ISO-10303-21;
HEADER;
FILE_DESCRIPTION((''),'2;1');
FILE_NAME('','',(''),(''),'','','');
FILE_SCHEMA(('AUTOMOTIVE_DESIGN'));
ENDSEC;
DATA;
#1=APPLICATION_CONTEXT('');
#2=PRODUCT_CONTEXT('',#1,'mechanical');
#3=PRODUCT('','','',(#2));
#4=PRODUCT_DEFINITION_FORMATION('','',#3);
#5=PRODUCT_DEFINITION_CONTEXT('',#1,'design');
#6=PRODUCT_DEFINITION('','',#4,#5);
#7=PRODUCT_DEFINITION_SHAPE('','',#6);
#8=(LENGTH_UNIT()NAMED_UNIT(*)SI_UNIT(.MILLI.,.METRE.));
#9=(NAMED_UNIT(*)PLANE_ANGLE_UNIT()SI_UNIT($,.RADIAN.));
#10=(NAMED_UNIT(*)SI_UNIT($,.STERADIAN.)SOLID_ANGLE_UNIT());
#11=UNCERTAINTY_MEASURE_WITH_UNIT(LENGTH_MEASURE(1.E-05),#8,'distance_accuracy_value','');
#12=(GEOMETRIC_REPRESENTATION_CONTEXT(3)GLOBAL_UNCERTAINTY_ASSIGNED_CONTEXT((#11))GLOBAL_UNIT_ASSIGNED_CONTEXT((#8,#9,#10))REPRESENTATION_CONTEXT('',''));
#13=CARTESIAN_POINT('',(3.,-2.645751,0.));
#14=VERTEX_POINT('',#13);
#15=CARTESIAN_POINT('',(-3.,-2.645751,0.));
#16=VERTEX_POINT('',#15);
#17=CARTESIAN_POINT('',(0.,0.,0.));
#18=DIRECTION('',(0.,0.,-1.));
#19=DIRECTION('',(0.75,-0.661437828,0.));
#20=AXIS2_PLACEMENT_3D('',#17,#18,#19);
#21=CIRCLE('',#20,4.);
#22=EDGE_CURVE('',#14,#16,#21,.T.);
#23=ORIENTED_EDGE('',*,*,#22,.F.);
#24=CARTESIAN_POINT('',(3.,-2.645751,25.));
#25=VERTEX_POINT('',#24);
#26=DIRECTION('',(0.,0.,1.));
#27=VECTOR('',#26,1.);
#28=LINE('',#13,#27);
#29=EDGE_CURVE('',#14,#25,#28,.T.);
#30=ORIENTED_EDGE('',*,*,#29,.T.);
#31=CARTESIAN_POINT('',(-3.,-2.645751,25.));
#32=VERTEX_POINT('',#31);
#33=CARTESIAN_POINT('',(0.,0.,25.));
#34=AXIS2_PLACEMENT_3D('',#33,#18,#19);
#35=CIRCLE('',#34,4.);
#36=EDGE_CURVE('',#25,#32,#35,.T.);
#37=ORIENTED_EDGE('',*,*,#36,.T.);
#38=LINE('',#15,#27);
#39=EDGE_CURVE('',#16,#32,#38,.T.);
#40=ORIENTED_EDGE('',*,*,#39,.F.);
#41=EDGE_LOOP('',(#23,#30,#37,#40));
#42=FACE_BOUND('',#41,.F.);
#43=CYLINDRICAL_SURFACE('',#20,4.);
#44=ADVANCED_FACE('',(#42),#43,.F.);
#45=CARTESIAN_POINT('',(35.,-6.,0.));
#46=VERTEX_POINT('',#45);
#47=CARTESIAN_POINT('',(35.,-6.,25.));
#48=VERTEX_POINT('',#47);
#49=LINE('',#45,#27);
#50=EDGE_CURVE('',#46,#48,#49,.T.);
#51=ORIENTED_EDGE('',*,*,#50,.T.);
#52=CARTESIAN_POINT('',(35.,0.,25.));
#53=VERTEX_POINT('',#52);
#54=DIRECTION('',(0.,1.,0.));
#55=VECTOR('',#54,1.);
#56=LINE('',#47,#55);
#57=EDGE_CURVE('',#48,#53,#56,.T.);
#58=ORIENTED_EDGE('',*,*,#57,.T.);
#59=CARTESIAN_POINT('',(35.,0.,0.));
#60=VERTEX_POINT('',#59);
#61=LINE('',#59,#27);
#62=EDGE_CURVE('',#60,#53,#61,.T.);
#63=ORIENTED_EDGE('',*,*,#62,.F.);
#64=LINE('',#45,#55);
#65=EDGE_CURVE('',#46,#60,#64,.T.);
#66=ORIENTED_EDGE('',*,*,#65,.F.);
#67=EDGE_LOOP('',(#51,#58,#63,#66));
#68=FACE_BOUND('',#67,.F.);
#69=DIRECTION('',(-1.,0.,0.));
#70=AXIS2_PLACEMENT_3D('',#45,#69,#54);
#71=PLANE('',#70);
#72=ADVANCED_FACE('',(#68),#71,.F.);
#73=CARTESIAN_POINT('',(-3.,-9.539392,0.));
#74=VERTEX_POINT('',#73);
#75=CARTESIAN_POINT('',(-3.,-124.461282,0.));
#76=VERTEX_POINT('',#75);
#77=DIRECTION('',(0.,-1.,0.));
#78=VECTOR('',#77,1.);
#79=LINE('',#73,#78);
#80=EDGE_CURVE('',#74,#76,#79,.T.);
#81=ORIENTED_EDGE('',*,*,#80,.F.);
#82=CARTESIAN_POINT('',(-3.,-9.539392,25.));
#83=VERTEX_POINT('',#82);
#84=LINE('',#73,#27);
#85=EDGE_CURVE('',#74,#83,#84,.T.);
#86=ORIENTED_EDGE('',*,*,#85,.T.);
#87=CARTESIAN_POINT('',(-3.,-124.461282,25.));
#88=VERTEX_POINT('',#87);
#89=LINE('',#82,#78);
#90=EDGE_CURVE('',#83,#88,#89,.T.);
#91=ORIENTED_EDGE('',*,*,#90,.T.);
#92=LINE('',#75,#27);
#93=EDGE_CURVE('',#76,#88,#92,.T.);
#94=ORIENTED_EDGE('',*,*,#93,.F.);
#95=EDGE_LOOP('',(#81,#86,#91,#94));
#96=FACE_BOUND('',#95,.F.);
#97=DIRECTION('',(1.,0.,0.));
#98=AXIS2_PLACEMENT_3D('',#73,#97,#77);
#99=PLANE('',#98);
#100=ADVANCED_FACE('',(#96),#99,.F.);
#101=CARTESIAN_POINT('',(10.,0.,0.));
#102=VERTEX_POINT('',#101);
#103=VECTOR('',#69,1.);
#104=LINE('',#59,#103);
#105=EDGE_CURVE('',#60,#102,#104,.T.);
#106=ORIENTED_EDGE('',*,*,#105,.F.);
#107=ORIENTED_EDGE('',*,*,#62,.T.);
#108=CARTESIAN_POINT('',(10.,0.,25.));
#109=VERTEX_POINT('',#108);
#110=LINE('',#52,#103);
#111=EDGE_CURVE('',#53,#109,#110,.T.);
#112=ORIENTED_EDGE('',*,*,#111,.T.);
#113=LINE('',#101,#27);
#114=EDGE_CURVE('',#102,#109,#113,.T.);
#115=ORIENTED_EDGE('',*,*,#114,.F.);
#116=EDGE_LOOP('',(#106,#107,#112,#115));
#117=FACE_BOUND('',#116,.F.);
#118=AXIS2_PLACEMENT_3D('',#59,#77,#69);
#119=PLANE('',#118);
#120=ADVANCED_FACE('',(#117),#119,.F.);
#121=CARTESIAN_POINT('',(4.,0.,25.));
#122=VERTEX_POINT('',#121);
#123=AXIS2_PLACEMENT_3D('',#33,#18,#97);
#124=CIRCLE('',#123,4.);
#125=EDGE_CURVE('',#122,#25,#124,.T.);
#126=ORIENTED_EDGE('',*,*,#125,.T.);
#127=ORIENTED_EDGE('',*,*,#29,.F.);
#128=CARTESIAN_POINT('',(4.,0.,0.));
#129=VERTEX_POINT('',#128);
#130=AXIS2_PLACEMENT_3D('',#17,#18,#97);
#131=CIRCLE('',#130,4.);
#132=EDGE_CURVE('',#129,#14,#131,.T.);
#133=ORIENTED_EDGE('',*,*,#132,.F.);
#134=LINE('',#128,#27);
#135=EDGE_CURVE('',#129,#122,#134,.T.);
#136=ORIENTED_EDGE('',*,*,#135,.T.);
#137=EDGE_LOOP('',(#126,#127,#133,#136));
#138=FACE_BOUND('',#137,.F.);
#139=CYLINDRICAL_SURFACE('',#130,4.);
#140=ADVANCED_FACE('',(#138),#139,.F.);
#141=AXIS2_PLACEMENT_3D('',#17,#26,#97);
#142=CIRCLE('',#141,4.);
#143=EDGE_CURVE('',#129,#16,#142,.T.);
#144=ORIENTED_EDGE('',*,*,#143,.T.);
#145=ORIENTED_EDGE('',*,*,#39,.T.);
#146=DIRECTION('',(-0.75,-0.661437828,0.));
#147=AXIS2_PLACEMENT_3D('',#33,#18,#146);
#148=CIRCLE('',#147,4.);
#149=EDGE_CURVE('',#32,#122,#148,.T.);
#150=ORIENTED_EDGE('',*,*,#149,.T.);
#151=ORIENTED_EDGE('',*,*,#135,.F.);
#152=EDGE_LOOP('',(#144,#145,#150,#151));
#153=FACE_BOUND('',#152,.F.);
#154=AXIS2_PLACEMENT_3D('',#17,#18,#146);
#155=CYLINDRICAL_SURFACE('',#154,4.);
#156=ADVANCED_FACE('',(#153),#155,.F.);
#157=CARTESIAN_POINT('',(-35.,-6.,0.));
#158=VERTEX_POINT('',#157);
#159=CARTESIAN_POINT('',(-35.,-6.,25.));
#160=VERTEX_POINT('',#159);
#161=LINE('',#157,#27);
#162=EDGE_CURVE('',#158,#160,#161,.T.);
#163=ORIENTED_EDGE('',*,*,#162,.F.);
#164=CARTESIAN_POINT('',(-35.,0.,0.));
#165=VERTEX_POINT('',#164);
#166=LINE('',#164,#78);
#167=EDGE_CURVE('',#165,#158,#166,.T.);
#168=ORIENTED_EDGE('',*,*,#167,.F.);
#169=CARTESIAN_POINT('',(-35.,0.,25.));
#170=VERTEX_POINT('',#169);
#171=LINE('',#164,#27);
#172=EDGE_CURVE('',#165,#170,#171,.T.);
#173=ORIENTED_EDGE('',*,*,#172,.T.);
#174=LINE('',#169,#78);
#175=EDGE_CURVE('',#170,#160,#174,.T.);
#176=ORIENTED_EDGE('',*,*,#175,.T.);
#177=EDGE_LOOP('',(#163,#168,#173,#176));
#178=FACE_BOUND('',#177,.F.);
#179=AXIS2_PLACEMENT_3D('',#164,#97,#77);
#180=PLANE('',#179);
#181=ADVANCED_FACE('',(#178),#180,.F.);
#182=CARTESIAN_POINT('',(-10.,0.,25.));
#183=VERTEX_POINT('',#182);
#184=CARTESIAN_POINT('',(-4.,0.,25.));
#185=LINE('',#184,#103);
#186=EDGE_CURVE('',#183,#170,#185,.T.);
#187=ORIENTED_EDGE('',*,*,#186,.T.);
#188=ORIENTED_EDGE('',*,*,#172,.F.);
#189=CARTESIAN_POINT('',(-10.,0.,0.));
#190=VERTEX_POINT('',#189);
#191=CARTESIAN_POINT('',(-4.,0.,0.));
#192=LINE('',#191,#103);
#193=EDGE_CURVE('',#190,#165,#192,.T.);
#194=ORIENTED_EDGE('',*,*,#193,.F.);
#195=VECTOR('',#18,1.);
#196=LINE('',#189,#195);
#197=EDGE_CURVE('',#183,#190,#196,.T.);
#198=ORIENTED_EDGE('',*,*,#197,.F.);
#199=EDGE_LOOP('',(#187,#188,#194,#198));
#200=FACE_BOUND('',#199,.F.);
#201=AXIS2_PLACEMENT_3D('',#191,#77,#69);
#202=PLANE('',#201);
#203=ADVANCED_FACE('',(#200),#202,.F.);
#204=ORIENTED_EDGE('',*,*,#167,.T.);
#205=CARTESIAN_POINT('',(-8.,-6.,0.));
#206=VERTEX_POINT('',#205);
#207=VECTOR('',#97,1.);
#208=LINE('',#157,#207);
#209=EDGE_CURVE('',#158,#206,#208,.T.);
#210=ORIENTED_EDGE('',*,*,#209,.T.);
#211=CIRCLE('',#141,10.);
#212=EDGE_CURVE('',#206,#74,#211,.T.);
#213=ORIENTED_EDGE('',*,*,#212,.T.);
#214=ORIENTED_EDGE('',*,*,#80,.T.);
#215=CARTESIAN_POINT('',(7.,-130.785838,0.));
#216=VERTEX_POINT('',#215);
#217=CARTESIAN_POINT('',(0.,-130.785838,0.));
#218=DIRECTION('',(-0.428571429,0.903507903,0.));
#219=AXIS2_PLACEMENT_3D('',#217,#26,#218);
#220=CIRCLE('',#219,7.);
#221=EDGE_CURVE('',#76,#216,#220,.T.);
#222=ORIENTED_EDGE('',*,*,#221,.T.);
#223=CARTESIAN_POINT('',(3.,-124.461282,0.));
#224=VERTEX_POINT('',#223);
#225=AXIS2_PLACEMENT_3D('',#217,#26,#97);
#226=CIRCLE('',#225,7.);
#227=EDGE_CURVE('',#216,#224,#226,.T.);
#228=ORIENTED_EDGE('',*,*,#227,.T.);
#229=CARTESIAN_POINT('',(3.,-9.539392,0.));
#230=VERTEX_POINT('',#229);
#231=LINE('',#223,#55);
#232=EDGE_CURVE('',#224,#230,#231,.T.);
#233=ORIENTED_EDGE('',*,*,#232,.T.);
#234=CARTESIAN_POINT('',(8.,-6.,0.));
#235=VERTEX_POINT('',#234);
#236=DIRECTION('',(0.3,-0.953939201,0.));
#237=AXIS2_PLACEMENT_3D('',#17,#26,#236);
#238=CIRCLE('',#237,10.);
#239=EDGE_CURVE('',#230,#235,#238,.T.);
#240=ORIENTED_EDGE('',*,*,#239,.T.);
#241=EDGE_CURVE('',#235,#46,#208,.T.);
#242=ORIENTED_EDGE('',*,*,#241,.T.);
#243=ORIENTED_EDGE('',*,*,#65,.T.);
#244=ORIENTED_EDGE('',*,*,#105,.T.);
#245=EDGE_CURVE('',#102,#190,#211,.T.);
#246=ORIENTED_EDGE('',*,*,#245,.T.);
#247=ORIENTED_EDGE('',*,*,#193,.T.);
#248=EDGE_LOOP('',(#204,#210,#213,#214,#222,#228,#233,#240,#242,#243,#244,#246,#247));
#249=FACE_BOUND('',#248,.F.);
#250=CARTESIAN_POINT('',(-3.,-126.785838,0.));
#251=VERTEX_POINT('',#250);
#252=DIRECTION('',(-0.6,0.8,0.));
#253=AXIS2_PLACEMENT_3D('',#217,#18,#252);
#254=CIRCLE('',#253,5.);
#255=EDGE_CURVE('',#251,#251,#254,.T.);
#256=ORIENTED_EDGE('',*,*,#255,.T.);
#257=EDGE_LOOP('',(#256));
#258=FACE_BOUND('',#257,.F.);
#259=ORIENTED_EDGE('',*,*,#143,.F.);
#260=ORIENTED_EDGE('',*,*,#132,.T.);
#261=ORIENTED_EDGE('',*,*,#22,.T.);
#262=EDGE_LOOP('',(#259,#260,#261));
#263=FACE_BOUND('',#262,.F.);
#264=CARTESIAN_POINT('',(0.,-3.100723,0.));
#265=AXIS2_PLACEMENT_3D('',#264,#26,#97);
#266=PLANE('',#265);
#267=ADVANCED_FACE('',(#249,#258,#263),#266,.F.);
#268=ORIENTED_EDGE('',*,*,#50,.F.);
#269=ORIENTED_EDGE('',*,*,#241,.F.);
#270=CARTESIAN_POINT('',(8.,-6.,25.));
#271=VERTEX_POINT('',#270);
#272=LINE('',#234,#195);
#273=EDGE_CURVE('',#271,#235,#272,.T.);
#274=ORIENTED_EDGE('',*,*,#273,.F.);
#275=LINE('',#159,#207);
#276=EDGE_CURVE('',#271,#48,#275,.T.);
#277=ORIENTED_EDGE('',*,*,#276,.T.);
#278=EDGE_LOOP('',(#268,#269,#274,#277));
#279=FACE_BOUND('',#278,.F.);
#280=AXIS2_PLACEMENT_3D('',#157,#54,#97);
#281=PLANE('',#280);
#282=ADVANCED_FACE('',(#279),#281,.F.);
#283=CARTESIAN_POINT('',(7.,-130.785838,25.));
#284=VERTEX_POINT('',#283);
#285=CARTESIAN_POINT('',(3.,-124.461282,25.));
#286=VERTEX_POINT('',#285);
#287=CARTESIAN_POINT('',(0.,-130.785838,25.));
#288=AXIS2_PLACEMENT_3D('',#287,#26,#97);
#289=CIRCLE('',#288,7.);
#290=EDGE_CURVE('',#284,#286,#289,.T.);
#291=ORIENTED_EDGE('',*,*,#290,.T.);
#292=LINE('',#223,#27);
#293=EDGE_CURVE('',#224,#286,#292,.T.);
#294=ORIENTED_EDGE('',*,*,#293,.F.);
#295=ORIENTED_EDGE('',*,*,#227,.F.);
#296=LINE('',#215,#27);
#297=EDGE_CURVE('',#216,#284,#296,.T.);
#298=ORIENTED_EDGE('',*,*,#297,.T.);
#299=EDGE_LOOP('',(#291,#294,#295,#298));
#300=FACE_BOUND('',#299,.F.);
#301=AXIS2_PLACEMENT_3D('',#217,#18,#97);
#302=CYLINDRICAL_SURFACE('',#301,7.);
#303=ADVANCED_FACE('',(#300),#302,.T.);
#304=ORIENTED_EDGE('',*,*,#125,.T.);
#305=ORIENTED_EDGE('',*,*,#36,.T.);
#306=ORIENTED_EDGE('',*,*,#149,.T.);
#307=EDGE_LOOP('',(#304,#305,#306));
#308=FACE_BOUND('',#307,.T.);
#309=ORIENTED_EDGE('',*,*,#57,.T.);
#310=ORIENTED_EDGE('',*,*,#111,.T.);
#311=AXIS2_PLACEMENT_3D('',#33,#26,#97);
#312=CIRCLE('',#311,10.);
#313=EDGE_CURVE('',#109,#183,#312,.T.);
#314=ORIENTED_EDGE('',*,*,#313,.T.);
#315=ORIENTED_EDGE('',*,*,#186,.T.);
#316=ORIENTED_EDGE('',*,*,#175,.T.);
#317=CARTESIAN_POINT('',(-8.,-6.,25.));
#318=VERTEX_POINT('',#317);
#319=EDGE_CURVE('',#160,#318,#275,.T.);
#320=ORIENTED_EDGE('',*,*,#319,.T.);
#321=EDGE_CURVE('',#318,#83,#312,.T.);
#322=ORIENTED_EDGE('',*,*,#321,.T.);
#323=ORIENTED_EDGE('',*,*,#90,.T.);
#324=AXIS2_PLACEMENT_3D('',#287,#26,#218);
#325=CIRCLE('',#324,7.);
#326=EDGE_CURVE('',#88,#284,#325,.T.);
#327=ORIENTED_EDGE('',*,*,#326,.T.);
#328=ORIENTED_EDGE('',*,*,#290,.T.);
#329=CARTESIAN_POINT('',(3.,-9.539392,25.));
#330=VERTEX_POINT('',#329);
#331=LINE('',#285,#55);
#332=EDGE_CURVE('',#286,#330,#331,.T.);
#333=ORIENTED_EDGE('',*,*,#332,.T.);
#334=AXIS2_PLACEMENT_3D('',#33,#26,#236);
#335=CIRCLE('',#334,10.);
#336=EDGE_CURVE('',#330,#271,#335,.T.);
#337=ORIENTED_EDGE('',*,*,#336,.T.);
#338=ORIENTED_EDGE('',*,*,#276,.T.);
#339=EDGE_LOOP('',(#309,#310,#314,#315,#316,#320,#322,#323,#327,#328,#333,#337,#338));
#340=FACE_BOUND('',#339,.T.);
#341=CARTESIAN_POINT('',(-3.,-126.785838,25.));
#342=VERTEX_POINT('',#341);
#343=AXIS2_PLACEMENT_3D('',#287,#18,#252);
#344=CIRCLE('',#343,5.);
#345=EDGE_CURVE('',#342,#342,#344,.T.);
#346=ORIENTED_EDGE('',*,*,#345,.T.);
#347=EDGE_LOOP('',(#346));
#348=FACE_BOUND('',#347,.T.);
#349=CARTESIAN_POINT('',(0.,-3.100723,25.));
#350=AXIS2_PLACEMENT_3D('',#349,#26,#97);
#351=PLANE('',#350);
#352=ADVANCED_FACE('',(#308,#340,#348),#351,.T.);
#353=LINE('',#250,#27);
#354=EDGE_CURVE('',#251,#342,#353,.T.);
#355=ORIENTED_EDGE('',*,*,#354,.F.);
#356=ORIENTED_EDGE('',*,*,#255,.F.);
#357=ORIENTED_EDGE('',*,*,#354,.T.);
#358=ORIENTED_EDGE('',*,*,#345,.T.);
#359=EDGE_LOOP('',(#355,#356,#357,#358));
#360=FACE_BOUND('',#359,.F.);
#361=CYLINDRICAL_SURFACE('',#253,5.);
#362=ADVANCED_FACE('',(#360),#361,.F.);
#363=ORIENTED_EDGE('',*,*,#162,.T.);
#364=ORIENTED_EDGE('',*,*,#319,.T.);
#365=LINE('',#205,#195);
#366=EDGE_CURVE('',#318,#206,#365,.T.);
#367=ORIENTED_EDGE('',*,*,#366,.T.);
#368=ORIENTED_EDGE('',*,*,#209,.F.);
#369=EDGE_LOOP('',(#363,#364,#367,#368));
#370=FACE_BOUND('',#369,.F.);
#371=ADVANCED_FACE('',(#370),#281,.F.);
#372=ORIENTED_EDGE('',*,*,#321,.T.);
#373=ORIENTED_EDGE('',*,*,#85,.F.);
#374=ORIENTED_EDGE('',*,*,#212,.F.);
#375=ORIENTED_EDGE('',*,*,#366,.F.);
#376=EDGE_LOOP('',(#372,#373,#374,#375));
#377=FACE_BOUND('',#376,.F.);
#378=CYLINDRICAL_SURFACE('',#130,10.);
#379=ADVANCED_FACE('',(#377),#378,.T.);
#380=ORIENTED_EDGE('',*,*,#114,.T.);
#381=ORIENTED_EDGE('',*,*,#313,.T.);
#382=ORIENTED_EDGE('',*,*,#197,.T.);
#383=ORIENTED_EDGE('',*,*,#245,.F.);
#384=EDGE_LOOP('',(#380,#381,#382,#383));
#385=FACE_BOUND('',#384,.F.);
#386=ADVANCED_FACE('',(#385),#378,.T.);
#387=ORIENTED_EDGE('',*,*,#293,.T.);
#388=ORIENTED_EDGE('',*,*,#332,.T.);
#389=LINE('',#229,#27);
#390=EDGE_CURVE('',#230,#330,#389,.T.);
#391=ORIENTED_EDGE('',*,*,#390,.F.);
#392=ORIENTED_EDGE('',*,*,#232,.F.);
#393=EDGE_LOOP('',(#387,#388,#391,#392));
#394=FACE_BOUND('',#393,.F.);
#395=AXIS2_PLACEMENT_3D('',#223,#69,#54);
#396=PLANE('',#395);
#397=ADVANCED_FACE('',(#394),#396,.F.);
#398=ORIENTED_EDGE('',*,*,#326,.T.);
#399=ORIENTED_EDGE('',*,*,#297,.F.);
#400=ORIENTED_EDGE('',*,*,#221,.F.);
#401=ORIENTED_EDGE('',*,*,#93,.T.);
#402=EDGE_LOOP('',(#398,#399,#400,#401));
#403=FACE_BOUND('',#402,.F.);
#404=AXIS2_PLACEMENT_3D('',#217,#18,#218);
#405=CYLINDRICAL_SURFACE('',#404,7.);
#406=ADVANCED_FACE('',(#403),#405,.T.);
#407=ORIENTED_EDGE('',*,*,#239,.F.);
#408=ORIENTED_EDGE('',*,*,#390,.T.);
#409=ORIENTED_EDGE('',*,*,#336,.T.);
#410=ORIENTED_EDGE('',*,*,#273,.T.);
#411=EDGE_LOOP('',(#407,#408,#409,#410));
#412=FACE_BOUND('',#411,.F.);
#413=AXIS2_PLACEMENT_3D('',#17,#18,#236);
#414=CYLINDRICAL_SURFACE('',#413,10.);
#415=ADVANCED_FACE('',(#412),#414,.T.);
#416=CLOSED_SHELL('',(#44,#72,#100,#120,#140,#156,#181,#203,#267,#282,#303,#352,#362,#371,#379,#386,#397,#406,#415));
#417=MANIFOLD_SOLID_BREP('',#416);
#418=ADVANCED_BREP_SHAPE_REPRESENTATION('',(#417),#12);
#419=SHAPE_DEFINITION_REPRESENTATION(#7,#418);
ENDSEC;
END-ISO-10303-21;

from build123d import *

# Parameters (mm, degrees)
F1_DEPTH = 25
F3_DEPTH = 25


# Not quite as in the source:
# - a feature names something its author has since deleted; it is built from what else it names


with BuildPart() as f1:
    # F0 (on Top) → F1 (new body)
    with BuildSketch(Plane.XY):
        with BuildLine():
            Line((-3, -126.7858377695), (-3, -124.4612824492))
            ThreePointArc((-3, -124.4612824492), (-3.7416573868, -136.7019175526), (7, -130.7858377695))
            ThreePointArc((7, -130.7858377695), (5.9160797831, -127.0441803827), (3, -124.4612824492))
            Line((3, -124.4612824492), (3, -126.7858377695))
            ThreePointArc((3, -126.7858377695), (4.472135955, -128.549769792), (5, -130.7858377695))
            ThreePointArc((5, -130.7858377695), (-2.2360679775, -135.2579737245), (-3, -126.7858377695))
        make_face()
        with BuildLine():
            ThreePointArc((3, -9.5393920142), (0, -10), (-3, -9.5393920142))
            Line((-3, -9.5393920142), (-3, -124.4612824492))
            ThreePointArc((-3, -124.4612824492), (0, -123.7858377695), (3, -124.4612824492))
            Line((3, -124.4612824492), (3, -9.5393920142))
        make_face()
        with BuildLine():
            ThreePointArc((3, -124.4612824492), (0, -123.7858377695), (-3, -124.4612824492))
            Line((-3, -124.4612824492), (-3, -126.7858377695))
            ThreePointArc((-3, -126.7858377695), (0, -125.7858377695), (3, -126.7858377695))
            Line((3, -126.7858377695), (3, -124.4612824492))
        make_face()
        with BuildLine():
            ThreePointArc((-3, -2.6457513111), (-1.4142135624, 3.7416573868), (4, 0))
            ThreePointArc((4, 0), (3.7416573868, -1.4142135624), (3, -2.6457513111))
            Line((3, -2.6457513111), (3, -9.5393920142))
            ThreePointArc((3, -9.5393920142), (8.0622577483, -5.9160797831), (10, 0))
            ThreePointArc((10, 0), (-5.9160797831, 8.0622577483), (-3, -9.5393920142))
            Line((-3, -9.5393920142), (-3, -2.6457513111))
        make_face()
        with BuildLine():
            ThreePointArc((3, -2.6457513111), (0, -4), (-3, -2.6457513111))
            Line((-3, -2.6457513111), (-3, -9.5393920142))
            ThreePointArc((-3, -9.5393920142), (0, -10), (3, -9.5393920142))
            Line((3, -9.5393920142), (3, -2.6457513111))
        make_face()
    extrude(amount=F1_DEPTH)

    # F2 (on Top) → F3 (join)
    with BuildSketch(Plane.XY):
        with BuildLine():
            Line((35, 0), (4, 0))
            ThreePointArc((4, 0), (0, -4), (-4, 0))
            Line((-4, 0), (-35, 0))
            Line((-35, 0), (-35, -6))
            Line((-35, -6), (35, -6))
            Line((35, -6), (35, 0))
        make_face()
    extrude(amount=F3_DEPTH)


solid = f1.part
